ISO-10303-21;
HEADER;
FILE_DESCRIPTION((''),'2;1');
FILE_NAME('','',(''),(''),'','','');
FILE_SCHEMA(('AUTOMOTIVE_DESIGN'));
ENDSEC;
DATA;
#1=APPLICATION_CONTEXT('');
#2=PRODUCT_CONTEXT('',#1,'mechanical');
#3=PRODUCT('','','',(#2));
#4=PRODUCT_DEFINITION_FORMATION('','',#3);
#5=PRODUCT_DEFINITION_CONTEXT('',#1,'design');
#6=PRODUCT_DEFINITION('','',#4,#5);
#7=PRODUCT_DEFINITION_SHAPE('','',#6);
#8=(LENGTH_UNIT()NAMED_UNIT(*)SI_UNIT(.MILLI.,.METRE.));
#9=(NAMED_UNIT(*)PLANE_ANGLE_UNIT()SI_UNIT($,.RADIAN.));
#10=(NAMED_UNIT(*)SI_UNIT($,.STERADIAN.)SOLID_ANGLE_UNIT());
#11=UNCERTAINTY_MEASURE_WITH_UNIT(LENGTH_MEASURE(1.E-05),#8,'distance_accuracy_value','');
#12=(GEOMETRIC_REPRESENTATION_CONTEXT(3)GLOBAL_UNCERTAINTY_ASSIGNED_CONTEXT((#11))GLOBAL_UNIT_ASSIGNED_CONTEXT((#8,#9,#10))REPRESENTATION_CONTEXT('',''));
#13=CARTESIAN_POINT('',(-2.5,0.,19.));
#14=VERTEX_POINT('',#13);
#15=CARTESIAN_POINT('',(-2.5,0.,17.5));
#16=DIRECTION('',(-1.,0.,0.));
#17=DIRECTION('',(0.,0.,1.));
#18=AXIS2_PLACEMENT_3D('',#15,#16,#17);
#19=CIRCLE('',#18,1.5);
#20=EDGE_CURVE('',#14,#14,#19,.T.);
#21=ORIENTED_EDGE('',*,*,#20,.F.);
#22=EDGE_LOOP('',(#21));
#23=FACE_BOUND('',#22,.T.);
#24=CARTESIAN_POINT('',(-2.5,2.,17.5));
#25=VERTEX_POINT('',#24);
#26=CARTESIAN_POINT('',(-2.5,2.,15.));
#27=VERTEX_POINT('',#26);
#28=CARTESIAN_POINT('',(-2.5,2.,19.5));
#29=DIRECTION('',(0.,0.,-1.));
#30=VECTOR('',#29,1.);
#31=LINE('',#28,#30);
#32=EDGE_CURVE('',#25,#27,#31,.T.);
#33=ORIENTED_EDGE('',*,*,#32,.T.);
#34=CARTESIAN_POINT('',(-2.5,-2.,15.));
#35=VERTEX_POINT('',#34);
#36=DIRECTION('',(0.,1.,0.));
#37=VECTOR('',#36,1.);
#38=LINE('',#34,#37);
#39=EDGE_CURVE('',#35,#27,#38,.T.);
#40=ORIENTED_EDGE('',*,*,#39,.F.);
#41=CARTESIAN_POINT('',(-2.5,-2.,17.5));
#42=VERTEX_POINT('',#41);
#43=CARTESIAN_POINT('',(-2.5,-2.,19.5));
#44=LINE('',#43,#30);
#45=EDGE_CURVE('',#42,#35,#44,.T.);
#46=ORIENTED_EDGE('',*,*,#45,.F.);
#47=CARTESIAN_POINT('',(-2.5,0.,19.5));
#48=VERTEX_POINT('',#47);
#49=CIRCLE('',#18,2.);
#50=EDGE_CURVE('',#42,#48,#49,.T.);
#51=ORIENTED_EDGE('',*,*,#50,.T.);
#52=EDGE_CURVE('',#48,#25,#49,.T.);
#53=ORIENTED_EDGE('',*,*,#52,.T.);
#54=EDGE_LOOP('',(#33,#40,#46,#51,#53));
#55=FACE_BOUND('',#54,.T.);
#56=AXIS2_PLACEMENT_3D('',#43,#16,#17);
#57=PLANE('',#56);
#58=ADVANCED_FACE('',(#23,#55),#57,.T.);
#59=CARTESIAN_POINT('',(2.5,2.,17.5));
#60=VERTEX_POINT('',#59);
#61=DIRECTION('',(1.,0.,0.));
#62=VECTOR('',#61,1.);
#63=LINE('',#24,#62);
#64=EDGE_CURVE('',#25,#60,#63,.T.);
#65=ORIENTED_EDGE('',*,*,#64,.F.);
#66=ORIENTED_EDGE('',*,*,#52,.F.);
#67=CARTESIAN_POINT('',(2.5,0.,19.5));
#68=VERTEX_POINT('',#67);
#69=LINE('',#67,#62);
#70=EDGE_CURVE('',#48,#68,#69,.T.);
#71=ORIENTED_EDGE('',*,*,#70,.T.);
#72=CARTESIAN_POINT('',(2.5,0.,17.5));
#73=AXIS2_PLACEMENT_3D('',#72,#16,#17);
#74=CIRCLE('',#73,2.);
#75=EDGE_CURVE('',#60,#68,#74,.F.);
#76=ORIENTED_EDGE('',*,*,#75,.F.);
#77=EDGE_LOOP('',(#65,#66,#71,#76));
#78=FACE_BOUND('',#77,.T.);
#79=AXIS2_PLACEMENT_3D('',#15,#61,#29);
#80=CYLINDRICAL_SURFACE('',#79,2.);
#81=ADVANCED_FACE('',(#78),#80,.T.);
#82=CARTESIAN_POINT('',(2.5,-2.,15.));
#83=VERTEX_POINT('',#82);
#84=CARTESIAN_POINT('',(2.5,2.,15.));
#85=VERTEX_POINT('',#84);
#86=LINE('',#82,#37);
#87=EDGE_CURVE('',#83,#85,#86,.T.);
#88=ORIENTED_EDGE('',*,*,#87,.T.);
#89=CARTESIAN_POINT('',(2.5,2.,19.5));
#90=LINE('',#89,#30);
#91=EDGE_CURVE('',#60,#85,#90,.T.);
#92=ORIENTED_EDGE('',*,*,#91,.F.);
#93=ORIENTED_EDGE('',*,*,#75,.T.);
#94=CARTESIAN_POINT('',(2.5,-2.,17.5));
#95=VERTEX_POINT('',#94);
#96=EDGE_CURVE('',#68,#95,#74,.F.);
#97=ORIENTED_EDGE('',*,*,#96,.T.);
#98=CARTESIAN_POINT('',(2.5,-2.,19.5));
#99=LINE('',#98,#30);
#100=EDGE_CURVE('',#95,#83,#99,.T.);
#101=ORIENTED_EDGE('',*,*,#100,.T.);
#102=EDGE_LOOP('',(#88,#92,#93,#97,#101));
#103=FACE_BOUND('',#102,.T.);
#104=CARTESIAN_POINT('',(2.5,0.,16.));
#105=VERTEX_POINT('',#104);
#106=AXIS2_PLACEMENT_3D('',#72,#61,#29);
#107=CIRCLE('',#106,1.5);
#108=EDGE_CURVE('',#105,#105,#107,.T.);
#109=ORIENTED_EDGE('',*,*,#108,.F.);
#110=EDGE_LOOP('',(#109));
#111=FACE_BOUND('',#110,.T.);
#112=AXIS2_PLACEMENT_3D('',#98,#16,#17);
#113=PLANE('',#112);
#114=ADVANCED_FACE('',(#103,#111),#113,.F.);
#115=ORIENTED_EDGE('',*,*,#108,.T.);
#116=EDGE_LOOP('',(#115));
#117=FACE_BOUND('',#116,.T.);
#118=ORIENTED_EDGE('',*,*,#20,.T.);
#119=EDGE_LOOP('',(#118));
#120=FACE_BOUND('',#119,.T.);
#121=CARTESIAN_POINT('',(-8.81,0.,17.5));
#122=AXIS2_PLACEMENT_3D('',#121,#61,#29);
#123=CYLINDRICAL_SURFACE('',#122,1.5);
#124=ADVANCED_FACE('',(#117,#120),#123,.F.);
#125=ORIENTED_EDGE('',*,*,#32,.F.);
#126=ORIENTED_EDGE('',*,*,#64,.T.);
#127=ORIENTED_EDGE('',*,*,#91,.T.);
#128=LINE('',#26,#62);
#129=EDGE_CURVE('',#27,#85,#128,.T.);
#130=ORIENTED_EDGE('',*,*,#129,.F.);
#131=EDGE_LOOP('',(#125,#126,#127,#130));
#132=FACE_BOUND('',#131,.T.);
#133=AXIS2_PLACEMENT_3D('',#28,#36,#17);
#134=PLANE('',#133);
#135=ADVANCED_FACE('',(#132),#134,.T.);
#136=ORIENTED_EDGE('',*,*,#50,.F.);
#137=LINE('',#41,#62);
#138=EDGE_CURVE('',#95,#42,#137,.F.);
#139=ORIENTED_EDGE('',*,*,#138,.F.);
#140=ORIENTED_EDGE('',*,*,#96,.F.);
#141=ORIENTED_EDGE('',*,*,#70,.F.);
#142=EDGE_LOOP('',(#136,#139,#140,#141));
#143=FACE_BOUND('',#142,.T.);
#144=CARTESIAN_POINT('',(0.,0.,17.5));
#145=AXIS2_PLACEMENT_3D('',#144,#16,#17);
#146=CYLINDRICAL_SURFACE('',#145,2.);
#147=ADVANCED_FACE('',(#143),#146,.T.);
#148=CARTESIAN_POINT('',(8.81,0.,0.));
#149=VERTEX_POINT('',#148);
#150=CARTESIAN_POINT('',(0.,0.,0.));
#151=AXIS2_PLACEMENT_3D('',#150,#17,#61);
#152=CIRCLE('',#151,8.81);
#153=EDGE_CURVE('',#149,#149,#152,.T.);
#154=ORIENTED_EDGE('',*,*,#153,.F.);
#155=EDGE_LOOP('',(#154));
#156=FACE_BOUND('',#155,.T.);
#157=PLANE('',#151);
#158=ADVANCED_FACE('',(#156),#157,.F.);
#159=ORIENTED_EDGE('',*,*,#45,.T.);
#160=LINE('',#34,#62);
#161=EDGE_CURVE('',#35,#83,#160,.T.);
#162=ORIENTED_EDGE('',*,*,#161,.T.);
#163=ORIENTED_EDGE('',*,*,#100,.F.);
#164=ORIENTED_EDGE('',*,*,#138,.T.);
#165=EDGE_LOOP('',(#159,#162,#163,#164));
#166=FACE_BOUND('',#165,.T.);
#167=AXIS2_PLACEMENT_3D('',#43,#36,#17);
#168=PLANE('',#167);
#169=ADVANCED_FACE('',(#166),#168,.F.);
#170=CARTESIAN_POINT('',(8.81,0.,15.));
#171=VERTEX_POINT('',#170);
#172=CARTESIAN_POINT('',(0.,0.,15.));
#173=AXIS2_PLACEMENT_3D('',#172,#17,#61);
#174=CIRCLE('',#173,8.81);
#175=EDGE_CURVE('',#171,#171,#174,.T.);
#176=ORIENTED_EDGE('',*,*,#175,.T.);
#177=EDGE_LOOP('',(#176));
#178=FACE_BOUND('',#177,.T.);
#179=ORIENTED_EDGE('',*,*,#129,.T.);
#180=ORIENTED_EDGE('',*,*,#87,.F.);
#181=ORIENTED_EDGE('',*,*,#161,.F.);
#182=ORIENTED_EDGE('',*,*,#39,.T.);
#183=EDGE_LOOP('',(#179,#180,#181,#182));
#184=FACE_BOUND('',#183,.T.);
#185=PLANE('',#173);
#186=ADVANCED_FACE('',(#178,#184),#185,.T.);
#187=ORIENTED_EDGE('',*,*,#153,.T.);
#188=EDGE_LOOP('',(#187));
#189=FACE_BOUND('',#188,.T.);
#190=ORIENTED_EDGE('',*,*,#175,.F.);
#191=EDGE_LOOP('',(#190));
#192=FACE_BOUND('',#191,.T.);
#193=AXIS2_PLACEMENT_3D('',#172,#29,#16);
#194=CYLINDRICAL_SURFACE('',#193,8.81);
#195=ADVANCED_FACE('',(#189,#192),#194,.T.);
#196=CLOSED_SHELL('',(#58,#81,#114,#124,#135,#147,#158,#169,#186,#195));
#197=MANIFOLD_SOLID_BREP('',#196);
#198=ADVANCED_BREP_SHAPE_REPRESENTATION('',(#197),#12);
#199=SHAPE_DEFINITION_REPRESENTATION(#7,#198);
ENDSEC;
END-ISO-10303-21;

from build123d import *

# Parameters (mm, degrees)
SKETCH1_R           = 8.81
BOSS_EXTRUDE1_DEPTH = 15
SKETCH2_W           = 5
SKETCH2_H           = 4
BOSS_EXTRUDE2_DEPTH = 4.5
FILLET7_R           = 2
SKETCH3_R           = 1.5
CUT_EXTRUDE1_DEPTH  = 25.202937838


with BuildPart() as part:
    # Sketch1 → Boss-Extrude1 (new body)
    with BuildSketch(Plane.XY):
        Circle(SKETCH1_R)
    extrude(amount=BOSS_EXTRUDE1_DEPTH)

    # Sketch2 → Boss-Extrude2 (add)
    with BuildSketch(Plane.XY.offset(15)):
        Rectangle(SKETCH2_W, SKETCH2_H)
    extrude(amount=BOSS_EXTRUDE2_DEPTH)

    # Fillet7
    fillet7_edges = [part.edges().sort_by_distance(p)[0] for p in [
        (0, 2, 19.5),
        (0, -2, 19.5),
    ]]
    fillet(fillet7_edges, radius=FILLET7_R - 0.0001)  # a hair under: the kernel refuses the full size

    # Sketch3 → Cut-Extrude1 (cut, through all)
    with BuildSketch(Plane(origin=(2.5, 0, 0), x_dir=(0, 0, -1), z_dir=(1, 0, 0))):
        with Locations((-17.5, 0)):
            Circle(SKETCH3_R)
    extrude(amount=-CUT_EXTRUDE1_DEPTH, mode=Mode.SUBTRACT)


solid = part.part
